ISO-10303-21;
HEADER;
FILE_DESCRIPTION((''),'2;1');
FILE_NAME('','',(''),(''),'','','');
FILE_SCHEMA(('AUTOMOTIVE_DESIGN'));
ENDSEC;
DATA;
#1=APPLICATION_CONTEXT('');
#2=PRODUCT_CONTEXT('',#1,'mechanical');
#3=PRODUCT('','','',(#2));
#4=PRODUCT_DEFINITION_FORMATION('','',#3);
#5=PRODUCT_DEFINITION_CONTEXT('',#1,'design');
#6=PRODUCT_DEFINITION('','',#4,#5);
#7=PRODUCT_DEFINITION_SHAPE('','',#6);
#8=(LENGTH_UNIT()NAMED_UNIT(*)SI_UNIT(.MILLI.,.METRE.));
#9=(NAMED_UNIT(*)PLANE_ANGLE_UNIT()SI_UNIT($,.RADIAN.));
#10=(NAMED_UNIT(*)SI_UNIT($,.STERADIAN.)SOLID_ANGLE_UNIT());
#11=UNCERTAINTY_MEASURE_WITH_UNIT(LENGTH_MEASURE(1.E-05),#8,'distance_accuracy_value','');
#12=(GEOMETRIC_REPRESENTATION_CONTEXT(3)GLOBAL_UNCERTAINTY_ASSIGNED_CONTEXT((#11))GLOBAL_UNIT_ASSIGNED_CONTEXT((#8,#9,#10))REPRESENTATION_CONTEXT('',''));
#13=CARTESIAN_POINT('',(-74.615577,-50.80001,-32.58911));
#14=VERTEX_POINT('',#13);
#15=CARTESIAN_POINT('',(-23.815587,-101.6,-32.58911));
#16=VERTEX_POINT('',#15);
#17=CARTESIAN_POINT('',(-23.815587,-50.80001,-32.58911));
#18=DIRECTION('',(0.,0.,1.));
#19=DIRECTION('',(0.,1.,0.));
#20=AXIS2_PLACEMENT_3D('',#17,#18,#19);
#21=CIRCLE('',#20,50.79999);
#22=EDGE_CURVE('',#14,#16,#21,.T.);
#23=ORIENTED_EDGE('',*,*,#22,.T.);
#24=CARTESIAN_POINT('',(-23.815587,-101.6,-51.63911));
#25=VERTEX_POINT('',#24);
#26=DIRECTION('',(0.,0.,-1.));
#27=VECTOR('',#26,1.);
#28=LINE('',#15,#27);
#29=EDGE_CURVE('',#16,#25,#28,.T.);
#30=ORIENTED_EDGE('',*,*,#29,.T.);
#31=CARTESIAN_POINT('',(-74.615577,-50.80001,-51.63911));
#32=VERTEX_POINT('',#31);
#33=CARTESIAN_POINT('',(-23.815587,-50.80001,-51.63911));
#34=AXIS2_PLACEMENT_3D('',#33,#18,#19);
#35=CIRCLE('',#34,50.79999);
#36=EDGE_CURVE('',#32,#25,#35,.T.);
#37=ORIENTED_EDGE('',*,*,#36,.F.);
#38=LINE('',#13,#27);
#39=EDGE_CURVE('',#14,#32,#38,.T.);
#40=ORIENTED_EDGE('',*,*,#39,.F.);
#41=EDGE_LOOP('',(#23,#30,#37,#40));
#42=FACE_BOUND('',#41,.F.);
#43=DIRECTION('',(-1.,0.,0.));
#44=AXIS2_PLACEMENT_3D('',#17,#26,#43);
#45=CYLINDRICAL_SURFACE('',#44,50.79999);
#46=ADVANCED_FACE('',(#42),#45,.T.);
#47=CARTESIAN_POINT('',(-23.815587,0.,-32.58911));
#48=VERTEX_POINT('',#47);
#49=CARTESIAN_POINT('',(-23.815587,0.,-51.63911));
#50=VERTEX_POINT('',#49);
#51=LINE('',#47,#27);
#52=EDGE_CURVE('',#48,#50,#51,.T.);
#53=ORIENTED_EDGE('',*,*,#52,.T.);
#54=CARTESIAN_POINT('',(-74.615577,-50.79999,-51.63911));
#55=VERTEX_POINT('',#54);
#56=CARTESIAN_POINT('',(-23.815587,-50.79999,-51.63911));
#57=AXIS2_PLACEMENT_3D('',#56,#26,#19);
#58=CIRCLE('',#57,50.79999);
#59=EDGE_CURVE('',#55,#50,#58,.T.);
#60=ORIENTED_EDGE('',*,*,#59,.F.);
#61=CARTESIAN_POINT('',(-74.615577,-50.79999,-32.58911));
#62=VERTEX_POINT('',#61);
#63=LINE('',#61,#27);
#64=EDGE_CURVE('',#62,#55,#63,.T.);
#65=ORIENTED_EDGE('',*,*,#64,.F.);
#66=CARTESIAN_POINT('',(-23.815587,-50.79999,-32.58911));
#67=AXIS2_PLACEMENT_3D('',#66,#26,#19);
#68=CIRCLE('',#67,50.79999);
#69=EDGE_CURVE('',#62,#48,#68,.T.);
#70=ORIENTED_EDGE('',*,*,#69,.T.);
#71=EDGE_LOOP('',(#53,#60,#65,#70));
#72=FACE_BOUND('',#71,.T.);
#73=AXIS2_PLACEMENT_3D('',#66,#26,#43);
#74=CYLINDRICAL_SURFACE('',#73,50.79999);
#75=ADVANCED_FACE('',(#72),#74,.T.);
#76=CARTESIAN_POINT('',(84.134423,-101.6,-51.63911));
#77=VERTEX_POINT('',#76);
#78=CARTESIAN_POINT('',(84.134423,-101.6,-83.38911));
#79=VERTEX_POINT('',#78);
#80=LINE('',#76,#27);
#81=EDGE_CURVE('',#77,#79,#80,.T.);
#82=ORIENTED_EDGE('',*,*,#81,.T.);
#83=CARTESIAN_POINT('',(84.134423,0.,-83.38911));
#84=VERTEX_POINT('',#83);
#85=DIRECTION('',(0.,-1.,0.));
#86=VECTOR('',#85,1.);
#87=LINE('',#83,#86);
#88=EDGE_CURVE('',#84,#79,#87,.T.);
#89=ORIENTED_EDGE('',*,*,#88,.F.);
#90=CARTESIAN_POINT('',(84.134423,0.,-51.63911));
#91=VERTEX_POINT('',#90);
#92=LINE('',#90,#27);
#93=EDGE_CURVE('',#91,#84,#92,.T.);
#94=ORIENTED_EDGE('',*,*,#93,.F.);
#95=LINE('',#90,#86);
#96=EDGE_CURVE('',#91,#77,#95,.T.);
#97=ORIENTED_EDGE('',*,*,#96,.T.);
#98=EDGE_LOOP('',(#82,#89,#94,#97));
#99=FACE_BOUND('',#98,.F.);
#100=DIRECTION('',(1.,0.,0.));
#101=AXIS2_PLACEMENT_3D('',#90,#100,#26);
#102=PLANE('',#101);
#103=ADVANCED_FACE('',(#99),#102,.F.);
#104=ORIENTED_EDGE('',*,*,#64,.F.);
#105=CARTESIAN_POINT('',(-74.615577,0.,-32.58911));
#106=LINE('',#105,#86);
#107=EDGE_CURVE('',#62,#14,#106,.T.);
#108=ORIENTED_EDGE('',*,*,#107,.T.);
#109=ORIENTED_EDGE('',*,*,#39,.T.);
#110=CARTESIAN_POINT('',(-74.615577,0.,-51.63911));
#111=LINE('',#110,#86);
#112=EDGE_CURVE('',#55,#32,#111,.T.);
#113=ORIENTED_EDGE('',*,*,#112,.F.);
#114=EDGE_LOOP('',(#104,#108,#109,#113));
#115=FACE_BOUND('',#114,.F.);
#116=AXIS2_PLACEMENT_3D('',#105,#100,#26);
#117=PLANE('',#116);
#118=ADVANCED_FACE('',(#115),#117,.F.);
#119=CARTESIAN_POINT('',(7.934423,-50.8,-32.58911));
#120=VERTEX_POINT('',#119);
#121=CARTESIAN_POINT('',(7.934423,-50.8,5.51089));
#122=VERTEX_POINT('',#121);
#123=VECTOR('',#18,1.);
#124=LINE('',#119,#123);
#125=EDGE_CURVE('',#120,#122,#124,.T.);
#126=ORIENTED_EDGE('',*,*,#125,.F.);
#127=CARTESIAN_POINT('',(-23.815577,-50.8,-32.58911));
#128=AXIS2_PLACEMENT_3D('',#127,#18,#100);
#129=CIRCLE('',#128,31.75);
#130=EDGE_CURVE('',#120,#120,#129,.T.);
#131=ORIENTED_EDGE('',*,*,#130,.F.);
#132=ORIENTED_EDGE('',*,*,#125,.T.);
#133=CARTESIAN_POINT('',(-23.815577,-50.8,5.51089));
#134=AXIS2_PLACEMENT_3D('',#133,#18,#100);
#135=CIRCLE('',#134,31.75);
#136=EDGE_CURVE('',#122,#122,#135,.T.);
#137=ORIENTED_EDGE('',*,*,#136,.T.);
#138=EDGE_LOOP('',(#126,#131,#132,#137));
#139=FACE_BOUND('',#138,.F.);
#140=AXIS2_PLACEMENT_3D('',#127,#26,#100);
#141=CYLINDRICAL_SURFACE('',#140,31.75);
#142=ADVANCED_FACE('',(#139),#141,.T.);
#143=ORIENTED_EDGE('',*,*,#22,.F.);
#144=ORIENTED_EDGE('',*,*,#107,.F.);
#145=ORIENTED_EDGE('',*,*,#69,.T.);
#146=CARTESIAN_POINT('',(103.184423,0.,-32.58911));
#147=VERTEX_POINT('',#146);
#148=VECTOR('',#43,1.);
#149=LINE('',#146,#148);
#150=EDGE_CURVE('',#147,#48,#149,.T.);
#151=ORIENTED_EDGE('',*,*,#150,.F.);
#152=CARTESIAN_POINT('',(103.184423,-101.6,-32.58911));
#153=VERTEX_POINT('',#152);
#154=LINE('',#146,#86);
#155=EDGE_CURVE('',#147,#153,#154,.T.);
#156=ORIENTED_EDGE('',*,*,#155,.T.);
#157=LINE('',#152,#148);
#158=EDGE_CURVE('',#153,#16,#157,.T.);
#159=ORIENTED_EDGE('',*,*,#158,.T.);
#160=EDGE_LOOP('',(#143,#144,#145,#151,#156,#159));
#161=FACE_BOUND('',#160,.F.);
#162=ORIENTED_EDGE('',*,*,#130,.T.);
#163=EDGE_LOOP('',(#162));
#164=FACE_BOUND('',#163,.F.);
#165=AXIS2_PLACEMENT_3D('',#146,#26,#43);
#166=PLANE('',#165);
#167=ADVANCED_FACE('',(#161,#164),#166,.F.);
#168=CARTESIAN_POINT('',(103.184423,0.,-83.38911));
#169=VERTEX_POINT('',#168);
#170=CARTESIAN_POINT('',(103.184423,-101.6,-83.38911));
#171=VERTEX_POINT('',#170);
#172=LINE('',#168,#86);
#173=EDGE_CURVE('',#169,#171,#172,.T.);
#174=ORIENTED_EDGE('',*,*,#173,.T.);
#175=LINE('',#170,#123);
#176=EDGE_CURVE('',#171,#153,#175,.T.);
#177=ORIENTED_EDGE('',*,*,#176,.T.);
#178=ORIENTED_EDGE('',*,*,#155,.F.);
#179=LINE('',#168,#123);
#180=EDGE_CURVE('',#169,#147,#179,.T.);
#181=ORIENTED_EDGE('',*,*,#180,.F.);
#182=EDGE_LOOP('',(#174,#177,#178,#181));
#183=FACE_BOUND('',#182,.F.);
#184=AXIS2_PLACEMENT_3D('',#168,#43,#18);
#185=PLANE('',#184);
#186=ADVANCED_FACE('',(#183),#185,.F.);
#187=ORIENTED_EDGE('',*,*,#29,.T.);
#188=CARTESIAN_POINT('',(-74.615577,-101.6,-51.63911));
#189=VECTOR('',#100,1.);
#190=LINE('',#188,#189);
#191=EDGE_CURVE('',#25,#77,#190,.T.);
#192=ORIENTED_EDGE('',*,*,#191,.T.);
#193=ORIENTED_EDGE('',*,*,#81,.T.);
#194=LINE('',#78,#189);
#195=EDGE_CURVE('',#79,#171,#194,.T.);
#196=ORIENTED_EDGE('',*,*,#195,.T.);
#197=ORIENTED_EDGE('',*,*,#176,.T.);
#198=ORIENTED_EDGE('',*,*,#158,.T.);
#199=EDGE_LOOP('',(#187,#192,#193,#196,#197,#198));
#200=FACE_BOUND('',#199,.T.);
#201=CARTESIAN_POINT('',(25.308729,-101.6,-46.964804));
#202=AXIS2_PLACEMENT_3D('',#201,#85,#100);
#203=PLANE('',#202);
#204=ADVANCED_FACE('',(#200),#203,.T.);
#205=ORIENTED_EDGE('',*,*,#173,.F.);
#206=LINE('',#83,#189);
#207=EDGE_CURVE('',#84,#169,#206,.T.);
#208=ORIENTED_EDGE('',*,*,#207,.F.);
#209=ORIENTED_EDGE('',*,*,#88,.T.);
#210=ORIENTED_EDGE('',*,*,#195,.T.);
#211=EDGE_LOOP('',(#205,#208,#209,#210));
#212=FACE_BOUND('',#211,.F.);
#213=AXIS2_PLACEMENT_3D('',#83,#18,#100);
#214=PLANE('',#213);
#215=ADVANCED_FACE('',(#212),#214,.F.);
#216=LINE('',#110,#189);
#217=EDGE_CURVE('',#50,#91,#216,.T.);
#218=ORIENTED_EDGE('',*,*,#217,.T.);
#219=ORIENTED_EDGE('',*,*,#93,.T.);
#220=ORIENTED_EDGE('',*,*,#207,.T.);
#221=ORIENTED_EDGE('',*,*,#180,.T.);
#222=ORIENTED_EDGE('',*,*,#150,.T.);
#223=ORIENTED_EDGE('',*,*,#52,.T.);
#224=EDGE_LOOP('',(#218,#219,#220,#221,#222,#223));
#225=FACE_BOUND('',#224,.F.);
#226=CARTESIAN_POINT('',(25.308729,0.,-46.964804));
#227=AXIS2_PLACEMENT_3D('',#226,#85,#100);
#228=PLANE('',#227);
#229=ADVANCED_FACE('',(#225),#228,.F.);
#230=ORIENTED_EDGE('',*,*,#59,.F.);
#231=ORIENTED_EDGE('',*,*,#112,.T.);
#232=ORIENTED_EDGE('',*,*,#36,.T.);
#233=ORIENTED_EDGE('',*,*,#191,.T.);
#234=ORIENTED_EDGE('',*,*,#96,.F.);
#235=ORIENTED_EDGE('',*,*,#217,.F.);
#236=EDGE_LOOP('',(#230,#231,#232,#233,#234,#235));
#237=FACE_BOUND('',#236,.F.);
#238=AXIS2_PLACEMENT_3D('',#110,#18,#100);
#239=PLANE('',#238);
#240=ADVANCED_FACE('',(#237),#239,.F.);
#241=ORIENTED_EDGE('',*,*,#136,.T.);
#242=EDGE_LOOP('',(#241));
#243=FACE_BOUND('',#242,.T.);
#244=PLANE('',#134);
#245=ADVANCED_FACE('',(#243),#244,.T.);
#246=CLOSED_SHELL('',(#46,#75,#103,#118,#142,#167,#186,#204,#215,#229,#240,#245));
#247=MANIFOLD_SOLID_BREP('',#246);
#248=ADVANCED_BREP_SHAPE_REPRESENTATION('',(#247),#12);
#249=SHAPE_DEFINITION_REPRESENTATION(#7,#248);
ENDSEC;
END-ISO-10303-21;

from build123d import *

# Parameters (mm, degrees)
F1_DEPTH = 101.6
F2_R     = 50.79999
F3_R     = 31.75
F4_DEPTH = 38.1


# Not quite as in the source:
# - a fillet or chamfer is up to 0.001 mm smaller than in the source, because OpenCascade refuses the exact size
# - the program builds the solid bodies; features that only make, move or delete a surface that nothing else refers to are left out


with BuildPart() as f1:
    # F0 (on Front) → F1 (new body)
    with BuildSketch(Plane.XZ):
        Polygon((-74.6155765653, -32.5891098499), (-74.6155765653, -51.6391098499), (84.1344234347, -51.6391098499), (84.1344234347, -79.0963023901), (84.1344234347, -83.3891098499), (103.1844234347, -83.3891098499), (103.1844234347, -32.5891098499), align=None)
    extrude(amount=F1_DEPTH)

    # F2 (radius 50.8 in the source; OpenCascade refuses exactly that, so slightly less here)
    f2_edges = [f1.edges().sort_by_distance(p)[0] for p in [
        (-74.615577, 0, -42.11411),
        (-74.615577, -101.6, -42.11411),
    ]]
    fillet(f2_edges, radius=F2_R)

    # F3 (on face) → F4 (join)
    with BuildSketch(Plane.XY.offset(-32.5891098499)):
        with Locations((-23.8155765653, -50.8)):
            Circle(F3_R)
    extrude(amount=F4_DEPTH)


solid = f1.part
